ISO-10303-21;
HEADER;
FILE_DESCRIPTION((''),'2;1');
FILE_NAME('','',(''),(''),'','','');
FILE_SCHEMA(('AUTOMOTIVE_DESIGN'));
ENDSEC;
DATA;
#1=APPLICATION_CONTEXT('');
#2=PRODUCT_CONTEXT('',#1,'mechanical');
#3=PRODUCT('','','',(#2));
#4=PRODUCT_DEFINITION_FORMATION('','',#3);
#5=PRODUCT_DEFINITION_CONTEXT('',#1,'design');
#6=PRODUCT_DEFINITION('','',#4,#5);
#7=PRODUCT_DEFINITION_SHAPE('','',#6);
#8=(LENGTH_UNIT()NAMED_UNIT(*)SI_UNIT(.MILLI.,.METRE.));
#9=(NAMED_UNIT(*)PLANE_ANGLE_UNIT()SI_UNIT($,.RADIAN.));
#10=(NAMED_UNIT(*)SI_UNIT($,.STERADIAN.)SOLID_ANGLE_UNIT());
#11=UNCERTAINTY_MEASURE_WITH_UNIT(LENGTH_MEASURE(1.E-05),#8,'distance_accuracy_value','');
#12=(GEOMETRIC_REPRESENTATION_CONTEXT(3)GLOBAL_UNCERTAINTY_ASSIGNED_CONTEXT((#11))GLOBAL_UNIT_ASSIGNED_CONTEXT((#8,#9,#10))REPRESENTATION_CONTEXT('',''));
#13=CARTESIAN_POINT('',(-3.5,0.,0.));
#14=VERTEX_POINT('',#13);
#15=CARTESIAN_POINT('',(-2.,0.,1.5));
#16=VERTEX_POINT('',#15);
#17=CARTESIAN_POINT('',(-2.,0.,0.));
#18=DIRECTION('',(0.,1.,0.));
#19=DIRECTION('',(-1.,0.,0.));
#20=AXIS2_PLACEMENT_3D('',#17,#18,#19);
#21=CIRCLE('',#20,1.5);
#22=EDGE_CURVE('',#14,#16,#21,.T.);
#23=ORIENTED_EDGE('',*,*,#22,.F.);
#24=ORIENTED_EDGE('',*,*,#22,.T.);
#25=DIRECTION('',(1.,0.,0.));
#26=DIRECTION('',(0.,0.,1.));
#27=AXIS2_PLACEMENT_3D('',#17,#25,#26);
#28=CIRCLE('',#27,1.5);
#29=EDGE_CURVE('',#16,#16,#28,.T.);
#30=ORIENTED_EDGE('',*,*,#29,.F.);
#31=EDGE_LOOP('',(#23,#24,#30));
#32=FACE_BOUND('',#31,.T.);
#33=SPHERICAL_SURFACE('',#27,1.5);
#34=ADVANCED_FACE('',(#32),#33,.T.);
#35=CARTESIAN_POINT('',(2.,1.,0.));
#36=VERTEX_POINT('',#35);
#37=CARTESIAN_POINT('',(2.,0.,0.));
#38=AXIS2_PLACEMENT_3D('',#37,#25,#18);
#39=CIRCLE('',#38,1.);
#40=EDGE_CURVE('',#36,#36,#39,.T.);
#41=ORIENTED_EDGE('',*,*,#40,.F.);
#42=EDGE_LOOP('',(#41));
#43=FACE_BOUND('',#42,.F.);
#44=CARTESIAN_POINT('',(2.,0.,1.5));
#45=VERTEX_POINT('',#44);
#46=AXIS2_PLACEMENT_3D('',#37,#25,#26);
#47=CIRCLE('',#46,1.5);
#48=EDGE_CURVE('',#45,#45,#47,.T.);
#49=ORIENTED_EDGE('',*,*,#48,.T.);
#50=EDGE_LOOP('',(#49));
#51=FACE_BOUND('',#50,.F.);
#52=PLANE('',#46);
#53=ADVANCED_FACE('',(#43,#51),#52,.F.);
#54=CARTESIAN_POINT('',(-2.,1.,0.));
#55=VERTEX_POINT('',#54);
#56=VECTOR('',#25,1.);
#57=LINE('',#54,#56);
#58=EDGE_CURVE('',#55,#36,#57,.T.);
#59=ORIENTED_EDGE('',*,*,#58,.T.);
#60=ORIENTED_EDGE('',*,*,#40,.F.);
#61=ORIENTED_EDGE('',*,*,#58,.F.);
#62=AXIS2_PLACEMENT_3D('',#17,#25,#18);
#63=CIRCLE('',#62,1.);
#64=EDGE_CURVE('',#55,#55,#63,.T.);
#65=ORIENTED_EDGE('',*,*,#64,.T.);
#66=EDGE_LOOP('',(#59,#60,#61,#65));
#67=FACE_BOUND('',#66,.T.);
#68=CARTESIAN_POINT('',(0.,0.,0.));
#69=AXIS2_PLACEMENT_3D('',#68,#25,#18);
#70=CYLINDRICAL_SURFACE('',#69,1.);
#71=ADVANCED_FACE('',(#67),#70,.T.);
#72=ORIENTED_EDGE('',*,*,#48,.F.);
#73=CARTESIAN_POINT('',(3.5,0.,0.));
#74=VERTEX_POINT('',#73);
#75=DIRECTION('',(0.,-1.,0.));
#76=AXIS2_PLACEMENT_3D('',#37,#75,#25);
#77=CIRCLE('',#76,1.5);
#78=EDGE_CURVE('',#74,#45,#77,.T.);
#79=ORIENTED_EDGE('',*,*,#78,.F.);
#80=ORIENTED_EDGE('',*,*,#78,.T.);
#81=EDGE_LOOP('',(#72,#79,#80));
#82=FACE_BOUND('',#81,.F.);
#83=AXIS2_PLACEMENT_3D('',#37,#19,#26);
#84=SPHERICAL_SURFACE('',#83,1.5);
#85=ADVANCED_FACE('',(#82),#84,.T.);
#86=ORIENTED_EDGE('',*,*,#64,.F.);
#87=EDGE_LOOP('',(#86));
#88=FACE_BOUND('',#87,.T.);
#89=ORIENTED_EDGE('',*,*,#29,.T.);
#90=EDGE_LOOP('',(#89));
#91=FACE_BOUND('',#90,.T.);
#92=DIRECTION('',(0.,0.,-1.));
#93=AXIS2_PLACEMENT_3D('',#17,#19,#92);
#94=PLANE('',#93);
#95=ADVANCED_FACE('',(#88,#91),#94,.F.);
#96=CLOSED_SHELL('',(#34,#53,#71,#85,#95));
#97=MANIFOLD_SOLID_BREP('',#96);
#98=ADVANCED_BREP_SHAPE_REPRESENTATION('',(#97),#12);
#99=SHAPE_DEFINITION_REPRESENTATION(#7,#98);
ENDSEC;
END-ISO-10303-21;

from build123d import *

# Parameters (mm, degrees)
F0_R     = 1
F1_DEPTH = 2


# Not quite as in the source:
# - a pattern or mirror of a feature is missing from the dataset's text; its kind, count and spacing are read off the source's solid


with BuildPart() as f1:
    # F0 (on Right) → F1 (new body, symmetric)
    with BuildSketch(Plane.YZ):
        Circle(F0_R)
    extrude(amount=F1_DEPTH, both=True)

    # F2 (on Front) → F3 (revolve)
    with BuildSketch(Plane.XZ):
        with BuildLine():
            Line((2, 0), (3.5, 0))
            ThreePointArc((3.5, 0), (3.0606601718, 1.0606601718), (2, 1.5))
            Line((2, 1.5), (2, 0))
        make_face()
    f3 = revolve(axis=Axis((2, 0, 0), (1, 0, 0)))

    # F3_copies: F3 across plane
    add(f3.mirror(Plane(origin=(0, 0, 0), x_dir=(0, 0, -1), z_dir=(-1, 0, 0))))


solid = f1.part
